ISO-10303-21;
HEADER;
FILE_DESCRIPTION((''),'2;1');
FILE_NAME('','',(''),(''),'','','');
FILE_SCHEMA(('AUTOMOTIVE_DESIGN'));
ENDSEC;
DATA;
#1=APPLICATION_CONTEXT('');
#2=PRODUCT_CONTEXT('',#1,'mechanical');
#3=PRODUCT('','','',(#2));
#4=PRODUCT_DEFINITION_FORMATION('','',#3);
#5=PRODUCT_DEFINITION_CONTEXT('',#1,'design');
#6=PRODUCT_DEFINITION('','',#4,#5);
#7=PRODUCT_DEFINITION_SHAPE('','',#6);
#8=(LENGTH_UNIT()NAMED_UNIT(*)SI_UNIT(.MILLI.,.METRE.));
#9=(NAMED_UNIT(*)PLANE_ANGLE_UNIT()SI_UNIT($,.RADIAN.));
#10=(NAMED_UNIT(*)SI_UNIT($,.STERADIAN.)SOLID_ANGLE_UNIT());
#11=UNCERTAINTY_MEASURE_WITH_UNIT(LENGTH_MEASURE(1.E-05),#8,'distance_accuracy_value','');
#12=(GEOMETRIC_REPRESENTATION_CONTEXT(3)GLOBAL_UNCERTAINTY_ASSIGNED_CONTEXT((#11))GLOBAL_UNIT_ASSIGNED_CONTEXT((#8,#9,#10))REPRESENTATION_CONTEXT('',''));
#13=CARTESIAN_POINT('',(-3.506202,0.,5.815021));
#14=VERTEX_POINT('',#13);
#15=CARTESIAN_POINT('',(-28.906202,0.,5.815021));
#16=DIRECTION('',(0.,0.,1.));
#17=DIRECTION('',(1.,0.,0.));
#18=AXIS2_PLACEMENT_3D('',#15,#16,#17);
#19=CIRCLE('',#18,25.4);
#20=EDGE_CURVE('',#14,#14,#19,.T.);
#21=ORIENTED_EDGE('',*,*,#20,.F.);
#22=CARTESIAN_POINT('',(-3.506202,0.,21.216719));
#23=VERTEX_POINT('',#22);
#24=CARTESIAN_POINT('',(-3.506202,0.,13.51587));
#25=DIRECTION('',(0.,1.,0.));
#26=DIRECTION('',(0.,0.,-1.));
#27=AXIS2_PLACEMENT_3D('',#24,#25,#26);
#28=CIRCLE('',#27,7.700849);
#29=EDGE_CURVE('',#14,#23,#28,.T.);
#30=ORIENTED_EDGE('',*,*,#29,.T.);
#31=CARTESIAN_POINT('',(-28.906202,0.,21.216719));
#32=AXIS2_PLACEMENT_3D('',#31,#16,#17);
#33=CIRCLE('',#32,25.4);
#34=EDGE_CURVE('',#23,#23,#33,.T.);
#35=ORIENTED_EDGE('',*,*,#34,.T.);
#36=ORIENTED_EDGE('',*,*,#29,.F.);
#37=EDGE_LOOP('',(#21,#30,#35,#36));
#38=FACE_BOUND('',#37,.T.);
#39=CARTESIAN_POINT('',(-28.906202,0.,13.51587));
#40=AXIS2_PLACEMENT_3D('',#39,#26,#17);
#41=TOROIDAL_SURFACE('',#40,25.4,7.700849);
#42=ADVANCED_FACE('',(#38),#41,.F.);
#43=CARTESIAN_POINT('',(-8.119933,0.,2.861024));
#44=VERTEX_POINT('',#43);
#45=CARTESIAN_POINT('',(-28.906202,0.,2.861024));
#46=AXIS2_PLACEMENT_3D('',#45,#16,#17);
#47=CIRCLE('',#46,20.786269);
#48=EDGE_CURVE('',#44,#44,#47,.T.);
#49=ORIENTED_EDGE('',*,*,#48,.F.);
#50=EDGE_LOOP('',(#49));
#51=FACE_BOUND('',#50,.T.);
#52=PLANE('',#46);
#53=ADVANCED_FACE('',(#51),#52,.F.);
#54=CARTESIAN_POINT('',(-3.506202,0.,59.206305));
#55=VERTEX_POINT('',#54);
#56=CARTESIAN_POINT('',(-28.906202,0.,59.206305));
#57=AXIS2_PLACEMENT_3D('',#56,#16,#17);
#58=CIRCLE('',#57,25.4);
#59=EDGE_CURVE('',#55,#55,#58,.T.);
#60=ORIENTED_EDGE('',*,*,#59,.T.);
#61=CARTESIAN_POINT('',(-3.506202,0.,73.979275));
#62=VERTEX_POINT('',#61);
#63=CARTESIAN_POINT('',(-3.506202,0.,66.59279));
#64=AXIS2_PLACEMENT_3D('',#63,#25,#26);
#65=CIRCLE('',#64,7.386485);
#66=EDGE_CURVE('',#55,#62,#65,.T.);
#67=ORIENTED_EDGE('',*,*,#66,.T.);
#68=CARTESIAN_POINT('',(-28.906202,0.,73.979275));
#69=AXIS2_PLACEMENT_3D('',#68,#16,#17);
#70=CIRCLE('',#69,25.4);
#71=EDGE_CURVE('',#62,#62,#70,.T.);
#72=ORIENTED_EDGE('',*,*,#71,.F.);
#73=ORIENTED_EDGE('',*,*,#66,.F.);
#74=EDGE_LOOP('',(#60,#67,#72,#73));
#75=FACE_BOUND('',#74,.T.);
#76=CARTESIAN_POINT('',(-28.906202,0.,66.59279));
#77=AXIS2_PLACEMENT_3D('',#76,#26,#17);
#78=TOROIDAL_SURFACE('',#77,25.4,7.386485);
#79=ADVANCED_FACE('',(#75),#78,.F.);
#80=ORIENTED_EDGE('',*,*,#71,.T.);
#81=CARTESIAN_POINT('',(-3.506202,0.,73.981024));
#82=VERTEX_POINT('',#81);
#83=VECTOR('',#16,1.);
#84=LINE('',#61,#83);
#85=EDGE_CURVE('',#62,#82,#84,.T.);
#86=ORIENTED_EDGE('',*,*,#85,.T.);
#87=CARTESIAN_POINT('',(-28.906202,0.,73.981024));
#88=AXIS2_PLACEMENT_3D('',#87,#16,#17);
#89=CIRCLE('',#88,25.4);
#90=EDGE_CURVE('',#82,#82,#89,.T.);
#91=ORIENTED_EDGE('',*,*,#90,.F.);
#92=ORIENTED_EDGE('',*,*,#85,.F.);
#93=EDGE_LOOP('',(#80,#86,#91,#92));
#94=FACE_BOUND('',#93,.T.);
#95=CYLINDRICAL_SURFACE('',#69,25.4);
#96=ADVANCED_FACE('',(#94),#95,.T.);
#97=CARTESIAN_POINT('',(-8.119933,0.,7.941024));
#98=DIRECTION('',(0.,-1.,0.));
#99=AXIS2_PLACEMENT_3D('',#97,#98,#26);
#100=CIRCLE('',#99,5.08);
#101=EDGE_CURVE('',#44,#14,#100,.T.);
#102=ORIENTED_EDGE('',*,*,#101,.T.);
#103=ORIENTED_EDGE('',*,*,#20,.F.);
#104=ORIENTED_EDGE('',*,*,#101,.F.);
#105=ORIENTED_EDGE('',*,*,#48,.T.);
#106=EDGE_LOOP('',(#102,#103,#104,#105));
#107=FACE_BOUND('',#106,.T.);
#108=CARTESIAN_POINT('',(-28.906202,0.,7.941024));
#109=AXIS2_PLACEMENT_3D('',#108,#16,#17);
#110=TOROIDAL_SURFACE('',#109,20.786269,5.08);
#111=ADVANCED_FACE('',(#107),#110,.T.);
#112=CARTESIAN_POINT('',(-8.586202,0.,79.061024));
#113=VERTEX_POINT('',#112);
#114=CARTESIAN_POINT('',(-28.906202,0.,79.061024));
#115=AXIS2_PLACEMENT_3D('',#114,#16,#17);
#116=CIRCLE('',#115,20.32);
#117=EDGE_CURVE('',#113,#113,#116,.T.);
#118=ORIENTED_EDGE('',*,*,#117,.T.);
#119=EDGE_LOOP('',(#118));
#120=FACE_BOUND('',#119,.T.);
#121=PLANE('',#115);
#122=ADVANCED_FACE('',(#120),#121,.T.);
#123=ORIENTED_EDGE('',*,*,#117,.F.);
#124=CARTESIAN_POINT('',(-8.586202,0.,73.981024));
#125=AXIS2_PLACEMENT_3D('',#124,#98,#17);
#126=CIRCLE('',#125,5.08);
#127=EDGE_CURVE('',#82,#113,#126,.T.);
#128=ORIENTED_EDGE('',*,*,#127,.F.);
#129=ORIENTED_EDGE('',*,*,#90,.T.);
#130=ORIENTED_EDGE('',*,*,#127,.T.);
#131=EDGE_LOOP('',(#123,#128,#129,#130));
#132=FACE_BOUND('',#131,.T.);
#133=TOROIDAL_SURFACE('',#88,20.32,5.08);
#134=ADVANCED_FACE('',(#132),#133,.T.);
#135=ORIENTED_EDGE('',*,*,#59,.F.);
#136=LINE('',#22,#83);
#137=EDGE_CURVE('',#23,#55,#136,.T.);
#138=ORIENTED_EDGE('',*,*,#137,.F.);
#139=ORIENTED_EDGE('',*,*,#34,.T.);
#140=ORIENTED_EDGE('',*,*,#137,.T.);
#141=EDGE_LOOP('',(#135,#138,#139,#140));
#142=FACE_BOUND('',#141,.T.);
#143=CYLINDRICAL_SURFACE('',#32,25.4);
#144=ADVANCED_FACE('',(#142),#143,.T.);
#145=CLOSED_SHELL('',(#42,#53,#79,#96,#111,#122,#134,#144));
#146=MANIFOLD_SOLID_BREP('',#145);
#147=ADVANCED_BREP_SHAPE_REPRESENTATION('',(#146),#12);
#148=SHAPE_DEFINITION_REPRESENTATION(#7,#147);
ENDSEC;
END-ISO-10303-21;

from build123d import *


# Not quite as in the source:
# - a fillet or chamfer that OpenCascade refuses, or shapes differently, is made with other operations: its cross-section is extruded or revolved along the edge and cut away or added


with BuildPart() as f1:
    # F0 (on Front) → F1 (revolve)
    with BuildSketch(Plane.XZ):
        with BuildLine():
            Line((-28.9062019438, 2.8610236477), (-3.5062019438, 2.8610236477))
            Line((-3.5062019438, 2.8610236477), (-3.5062019438, 5.8150213674))
            ThreePointArc((-3.5062019438, 5.8150213674), (-11.2070506632, 13.5158700868), (-3.5062019438, 21.2167188063))
            Line((-3.5062019438, 21.2167188063), (-3.5062019438, 59.2063053419))
            ThreePointArc((-3.5062019438, 59.2063053419), (-10.8926867883, 66.5927901864), (-3.5062019438, 73.9792750309))
            Line((-3.5062019438, 73.9792750309), (-3.5062019438, 79.0610236477))
            Line((-3.5062019438, 79.0610236477), (-28.9062019438, 79.0610236477))
            Line((-28.9062019438, 79.0610236477), (-28.9062019438, 2.8610236477))
        make_face()
    revolve(axis=Axis((-28.9062019438, 0, 40.9610236477), (0, 0, 1)))

    # F2: fillet of radius 5.08 on 2 edges, made by hand

    # F2_s1 → F2_t2 (revolve, cut)
    with BuildSketch(Plane.XZ):
        with BuildLine():
            ThreePointArc((-3.5062019438, 73.9810236477), (-4.9940994953, 77.5731260961), (-8.5862019438, 79.0610236477))
            Line((-8.5862019438, 79.0610236477), (-8.5862019438, 79.1626236477))
            Line((-8.5862019438, 79.1626236477), (-3.4046019438, 79.1626236477))
            Line((-3.4046019438, 79.1626236477), (-3.4046019438, 73.9810236477))
            Line((-3.4046019438, 73.9810236477), (-3.5062019438, 73.9810236477))
        make_face()
    revolve(axis=Axis((-28.9062019438, 0, 79.0610236477), (0, 0, 1)), mode=Mode.SUBTRACT)

    # F2_s3 → F2_t4 (revolve, cut)
    with BuildSketch(Plane.XZ):
        with BuildLine():
            ThreePointArc((-8.1199330049, 2.8610236477), (-5.3807444009, 3.6627943654), (-3.5062019438, 5.8150213674))
            Line((-3.5062019438, 5.8150213674), (-3.4139273225, 5.7725013218))
            ThreePointArc((-3.4139273225, 5.7725013218), (-3.4046019438, 4.3380225076), (-3.4046019438, 2.8610236477))
            Line((-3.4046019438, 2.8610236477), (-3.5062019438, 2.7594236477))
            Line((-3.5062019438, 2.7594236477), (-8.1199330049, 2.7594236477))
            Line((-8.1199330049, 2.7594236477), (-8.1199330049, 2.8610236477))
        make_face()
    revolve(axis=Axis((-28.9062019438, 0, 2.8610236477), (0, 0, 1)), mode=Mode.SUBTRACT)


solid = f1.part
